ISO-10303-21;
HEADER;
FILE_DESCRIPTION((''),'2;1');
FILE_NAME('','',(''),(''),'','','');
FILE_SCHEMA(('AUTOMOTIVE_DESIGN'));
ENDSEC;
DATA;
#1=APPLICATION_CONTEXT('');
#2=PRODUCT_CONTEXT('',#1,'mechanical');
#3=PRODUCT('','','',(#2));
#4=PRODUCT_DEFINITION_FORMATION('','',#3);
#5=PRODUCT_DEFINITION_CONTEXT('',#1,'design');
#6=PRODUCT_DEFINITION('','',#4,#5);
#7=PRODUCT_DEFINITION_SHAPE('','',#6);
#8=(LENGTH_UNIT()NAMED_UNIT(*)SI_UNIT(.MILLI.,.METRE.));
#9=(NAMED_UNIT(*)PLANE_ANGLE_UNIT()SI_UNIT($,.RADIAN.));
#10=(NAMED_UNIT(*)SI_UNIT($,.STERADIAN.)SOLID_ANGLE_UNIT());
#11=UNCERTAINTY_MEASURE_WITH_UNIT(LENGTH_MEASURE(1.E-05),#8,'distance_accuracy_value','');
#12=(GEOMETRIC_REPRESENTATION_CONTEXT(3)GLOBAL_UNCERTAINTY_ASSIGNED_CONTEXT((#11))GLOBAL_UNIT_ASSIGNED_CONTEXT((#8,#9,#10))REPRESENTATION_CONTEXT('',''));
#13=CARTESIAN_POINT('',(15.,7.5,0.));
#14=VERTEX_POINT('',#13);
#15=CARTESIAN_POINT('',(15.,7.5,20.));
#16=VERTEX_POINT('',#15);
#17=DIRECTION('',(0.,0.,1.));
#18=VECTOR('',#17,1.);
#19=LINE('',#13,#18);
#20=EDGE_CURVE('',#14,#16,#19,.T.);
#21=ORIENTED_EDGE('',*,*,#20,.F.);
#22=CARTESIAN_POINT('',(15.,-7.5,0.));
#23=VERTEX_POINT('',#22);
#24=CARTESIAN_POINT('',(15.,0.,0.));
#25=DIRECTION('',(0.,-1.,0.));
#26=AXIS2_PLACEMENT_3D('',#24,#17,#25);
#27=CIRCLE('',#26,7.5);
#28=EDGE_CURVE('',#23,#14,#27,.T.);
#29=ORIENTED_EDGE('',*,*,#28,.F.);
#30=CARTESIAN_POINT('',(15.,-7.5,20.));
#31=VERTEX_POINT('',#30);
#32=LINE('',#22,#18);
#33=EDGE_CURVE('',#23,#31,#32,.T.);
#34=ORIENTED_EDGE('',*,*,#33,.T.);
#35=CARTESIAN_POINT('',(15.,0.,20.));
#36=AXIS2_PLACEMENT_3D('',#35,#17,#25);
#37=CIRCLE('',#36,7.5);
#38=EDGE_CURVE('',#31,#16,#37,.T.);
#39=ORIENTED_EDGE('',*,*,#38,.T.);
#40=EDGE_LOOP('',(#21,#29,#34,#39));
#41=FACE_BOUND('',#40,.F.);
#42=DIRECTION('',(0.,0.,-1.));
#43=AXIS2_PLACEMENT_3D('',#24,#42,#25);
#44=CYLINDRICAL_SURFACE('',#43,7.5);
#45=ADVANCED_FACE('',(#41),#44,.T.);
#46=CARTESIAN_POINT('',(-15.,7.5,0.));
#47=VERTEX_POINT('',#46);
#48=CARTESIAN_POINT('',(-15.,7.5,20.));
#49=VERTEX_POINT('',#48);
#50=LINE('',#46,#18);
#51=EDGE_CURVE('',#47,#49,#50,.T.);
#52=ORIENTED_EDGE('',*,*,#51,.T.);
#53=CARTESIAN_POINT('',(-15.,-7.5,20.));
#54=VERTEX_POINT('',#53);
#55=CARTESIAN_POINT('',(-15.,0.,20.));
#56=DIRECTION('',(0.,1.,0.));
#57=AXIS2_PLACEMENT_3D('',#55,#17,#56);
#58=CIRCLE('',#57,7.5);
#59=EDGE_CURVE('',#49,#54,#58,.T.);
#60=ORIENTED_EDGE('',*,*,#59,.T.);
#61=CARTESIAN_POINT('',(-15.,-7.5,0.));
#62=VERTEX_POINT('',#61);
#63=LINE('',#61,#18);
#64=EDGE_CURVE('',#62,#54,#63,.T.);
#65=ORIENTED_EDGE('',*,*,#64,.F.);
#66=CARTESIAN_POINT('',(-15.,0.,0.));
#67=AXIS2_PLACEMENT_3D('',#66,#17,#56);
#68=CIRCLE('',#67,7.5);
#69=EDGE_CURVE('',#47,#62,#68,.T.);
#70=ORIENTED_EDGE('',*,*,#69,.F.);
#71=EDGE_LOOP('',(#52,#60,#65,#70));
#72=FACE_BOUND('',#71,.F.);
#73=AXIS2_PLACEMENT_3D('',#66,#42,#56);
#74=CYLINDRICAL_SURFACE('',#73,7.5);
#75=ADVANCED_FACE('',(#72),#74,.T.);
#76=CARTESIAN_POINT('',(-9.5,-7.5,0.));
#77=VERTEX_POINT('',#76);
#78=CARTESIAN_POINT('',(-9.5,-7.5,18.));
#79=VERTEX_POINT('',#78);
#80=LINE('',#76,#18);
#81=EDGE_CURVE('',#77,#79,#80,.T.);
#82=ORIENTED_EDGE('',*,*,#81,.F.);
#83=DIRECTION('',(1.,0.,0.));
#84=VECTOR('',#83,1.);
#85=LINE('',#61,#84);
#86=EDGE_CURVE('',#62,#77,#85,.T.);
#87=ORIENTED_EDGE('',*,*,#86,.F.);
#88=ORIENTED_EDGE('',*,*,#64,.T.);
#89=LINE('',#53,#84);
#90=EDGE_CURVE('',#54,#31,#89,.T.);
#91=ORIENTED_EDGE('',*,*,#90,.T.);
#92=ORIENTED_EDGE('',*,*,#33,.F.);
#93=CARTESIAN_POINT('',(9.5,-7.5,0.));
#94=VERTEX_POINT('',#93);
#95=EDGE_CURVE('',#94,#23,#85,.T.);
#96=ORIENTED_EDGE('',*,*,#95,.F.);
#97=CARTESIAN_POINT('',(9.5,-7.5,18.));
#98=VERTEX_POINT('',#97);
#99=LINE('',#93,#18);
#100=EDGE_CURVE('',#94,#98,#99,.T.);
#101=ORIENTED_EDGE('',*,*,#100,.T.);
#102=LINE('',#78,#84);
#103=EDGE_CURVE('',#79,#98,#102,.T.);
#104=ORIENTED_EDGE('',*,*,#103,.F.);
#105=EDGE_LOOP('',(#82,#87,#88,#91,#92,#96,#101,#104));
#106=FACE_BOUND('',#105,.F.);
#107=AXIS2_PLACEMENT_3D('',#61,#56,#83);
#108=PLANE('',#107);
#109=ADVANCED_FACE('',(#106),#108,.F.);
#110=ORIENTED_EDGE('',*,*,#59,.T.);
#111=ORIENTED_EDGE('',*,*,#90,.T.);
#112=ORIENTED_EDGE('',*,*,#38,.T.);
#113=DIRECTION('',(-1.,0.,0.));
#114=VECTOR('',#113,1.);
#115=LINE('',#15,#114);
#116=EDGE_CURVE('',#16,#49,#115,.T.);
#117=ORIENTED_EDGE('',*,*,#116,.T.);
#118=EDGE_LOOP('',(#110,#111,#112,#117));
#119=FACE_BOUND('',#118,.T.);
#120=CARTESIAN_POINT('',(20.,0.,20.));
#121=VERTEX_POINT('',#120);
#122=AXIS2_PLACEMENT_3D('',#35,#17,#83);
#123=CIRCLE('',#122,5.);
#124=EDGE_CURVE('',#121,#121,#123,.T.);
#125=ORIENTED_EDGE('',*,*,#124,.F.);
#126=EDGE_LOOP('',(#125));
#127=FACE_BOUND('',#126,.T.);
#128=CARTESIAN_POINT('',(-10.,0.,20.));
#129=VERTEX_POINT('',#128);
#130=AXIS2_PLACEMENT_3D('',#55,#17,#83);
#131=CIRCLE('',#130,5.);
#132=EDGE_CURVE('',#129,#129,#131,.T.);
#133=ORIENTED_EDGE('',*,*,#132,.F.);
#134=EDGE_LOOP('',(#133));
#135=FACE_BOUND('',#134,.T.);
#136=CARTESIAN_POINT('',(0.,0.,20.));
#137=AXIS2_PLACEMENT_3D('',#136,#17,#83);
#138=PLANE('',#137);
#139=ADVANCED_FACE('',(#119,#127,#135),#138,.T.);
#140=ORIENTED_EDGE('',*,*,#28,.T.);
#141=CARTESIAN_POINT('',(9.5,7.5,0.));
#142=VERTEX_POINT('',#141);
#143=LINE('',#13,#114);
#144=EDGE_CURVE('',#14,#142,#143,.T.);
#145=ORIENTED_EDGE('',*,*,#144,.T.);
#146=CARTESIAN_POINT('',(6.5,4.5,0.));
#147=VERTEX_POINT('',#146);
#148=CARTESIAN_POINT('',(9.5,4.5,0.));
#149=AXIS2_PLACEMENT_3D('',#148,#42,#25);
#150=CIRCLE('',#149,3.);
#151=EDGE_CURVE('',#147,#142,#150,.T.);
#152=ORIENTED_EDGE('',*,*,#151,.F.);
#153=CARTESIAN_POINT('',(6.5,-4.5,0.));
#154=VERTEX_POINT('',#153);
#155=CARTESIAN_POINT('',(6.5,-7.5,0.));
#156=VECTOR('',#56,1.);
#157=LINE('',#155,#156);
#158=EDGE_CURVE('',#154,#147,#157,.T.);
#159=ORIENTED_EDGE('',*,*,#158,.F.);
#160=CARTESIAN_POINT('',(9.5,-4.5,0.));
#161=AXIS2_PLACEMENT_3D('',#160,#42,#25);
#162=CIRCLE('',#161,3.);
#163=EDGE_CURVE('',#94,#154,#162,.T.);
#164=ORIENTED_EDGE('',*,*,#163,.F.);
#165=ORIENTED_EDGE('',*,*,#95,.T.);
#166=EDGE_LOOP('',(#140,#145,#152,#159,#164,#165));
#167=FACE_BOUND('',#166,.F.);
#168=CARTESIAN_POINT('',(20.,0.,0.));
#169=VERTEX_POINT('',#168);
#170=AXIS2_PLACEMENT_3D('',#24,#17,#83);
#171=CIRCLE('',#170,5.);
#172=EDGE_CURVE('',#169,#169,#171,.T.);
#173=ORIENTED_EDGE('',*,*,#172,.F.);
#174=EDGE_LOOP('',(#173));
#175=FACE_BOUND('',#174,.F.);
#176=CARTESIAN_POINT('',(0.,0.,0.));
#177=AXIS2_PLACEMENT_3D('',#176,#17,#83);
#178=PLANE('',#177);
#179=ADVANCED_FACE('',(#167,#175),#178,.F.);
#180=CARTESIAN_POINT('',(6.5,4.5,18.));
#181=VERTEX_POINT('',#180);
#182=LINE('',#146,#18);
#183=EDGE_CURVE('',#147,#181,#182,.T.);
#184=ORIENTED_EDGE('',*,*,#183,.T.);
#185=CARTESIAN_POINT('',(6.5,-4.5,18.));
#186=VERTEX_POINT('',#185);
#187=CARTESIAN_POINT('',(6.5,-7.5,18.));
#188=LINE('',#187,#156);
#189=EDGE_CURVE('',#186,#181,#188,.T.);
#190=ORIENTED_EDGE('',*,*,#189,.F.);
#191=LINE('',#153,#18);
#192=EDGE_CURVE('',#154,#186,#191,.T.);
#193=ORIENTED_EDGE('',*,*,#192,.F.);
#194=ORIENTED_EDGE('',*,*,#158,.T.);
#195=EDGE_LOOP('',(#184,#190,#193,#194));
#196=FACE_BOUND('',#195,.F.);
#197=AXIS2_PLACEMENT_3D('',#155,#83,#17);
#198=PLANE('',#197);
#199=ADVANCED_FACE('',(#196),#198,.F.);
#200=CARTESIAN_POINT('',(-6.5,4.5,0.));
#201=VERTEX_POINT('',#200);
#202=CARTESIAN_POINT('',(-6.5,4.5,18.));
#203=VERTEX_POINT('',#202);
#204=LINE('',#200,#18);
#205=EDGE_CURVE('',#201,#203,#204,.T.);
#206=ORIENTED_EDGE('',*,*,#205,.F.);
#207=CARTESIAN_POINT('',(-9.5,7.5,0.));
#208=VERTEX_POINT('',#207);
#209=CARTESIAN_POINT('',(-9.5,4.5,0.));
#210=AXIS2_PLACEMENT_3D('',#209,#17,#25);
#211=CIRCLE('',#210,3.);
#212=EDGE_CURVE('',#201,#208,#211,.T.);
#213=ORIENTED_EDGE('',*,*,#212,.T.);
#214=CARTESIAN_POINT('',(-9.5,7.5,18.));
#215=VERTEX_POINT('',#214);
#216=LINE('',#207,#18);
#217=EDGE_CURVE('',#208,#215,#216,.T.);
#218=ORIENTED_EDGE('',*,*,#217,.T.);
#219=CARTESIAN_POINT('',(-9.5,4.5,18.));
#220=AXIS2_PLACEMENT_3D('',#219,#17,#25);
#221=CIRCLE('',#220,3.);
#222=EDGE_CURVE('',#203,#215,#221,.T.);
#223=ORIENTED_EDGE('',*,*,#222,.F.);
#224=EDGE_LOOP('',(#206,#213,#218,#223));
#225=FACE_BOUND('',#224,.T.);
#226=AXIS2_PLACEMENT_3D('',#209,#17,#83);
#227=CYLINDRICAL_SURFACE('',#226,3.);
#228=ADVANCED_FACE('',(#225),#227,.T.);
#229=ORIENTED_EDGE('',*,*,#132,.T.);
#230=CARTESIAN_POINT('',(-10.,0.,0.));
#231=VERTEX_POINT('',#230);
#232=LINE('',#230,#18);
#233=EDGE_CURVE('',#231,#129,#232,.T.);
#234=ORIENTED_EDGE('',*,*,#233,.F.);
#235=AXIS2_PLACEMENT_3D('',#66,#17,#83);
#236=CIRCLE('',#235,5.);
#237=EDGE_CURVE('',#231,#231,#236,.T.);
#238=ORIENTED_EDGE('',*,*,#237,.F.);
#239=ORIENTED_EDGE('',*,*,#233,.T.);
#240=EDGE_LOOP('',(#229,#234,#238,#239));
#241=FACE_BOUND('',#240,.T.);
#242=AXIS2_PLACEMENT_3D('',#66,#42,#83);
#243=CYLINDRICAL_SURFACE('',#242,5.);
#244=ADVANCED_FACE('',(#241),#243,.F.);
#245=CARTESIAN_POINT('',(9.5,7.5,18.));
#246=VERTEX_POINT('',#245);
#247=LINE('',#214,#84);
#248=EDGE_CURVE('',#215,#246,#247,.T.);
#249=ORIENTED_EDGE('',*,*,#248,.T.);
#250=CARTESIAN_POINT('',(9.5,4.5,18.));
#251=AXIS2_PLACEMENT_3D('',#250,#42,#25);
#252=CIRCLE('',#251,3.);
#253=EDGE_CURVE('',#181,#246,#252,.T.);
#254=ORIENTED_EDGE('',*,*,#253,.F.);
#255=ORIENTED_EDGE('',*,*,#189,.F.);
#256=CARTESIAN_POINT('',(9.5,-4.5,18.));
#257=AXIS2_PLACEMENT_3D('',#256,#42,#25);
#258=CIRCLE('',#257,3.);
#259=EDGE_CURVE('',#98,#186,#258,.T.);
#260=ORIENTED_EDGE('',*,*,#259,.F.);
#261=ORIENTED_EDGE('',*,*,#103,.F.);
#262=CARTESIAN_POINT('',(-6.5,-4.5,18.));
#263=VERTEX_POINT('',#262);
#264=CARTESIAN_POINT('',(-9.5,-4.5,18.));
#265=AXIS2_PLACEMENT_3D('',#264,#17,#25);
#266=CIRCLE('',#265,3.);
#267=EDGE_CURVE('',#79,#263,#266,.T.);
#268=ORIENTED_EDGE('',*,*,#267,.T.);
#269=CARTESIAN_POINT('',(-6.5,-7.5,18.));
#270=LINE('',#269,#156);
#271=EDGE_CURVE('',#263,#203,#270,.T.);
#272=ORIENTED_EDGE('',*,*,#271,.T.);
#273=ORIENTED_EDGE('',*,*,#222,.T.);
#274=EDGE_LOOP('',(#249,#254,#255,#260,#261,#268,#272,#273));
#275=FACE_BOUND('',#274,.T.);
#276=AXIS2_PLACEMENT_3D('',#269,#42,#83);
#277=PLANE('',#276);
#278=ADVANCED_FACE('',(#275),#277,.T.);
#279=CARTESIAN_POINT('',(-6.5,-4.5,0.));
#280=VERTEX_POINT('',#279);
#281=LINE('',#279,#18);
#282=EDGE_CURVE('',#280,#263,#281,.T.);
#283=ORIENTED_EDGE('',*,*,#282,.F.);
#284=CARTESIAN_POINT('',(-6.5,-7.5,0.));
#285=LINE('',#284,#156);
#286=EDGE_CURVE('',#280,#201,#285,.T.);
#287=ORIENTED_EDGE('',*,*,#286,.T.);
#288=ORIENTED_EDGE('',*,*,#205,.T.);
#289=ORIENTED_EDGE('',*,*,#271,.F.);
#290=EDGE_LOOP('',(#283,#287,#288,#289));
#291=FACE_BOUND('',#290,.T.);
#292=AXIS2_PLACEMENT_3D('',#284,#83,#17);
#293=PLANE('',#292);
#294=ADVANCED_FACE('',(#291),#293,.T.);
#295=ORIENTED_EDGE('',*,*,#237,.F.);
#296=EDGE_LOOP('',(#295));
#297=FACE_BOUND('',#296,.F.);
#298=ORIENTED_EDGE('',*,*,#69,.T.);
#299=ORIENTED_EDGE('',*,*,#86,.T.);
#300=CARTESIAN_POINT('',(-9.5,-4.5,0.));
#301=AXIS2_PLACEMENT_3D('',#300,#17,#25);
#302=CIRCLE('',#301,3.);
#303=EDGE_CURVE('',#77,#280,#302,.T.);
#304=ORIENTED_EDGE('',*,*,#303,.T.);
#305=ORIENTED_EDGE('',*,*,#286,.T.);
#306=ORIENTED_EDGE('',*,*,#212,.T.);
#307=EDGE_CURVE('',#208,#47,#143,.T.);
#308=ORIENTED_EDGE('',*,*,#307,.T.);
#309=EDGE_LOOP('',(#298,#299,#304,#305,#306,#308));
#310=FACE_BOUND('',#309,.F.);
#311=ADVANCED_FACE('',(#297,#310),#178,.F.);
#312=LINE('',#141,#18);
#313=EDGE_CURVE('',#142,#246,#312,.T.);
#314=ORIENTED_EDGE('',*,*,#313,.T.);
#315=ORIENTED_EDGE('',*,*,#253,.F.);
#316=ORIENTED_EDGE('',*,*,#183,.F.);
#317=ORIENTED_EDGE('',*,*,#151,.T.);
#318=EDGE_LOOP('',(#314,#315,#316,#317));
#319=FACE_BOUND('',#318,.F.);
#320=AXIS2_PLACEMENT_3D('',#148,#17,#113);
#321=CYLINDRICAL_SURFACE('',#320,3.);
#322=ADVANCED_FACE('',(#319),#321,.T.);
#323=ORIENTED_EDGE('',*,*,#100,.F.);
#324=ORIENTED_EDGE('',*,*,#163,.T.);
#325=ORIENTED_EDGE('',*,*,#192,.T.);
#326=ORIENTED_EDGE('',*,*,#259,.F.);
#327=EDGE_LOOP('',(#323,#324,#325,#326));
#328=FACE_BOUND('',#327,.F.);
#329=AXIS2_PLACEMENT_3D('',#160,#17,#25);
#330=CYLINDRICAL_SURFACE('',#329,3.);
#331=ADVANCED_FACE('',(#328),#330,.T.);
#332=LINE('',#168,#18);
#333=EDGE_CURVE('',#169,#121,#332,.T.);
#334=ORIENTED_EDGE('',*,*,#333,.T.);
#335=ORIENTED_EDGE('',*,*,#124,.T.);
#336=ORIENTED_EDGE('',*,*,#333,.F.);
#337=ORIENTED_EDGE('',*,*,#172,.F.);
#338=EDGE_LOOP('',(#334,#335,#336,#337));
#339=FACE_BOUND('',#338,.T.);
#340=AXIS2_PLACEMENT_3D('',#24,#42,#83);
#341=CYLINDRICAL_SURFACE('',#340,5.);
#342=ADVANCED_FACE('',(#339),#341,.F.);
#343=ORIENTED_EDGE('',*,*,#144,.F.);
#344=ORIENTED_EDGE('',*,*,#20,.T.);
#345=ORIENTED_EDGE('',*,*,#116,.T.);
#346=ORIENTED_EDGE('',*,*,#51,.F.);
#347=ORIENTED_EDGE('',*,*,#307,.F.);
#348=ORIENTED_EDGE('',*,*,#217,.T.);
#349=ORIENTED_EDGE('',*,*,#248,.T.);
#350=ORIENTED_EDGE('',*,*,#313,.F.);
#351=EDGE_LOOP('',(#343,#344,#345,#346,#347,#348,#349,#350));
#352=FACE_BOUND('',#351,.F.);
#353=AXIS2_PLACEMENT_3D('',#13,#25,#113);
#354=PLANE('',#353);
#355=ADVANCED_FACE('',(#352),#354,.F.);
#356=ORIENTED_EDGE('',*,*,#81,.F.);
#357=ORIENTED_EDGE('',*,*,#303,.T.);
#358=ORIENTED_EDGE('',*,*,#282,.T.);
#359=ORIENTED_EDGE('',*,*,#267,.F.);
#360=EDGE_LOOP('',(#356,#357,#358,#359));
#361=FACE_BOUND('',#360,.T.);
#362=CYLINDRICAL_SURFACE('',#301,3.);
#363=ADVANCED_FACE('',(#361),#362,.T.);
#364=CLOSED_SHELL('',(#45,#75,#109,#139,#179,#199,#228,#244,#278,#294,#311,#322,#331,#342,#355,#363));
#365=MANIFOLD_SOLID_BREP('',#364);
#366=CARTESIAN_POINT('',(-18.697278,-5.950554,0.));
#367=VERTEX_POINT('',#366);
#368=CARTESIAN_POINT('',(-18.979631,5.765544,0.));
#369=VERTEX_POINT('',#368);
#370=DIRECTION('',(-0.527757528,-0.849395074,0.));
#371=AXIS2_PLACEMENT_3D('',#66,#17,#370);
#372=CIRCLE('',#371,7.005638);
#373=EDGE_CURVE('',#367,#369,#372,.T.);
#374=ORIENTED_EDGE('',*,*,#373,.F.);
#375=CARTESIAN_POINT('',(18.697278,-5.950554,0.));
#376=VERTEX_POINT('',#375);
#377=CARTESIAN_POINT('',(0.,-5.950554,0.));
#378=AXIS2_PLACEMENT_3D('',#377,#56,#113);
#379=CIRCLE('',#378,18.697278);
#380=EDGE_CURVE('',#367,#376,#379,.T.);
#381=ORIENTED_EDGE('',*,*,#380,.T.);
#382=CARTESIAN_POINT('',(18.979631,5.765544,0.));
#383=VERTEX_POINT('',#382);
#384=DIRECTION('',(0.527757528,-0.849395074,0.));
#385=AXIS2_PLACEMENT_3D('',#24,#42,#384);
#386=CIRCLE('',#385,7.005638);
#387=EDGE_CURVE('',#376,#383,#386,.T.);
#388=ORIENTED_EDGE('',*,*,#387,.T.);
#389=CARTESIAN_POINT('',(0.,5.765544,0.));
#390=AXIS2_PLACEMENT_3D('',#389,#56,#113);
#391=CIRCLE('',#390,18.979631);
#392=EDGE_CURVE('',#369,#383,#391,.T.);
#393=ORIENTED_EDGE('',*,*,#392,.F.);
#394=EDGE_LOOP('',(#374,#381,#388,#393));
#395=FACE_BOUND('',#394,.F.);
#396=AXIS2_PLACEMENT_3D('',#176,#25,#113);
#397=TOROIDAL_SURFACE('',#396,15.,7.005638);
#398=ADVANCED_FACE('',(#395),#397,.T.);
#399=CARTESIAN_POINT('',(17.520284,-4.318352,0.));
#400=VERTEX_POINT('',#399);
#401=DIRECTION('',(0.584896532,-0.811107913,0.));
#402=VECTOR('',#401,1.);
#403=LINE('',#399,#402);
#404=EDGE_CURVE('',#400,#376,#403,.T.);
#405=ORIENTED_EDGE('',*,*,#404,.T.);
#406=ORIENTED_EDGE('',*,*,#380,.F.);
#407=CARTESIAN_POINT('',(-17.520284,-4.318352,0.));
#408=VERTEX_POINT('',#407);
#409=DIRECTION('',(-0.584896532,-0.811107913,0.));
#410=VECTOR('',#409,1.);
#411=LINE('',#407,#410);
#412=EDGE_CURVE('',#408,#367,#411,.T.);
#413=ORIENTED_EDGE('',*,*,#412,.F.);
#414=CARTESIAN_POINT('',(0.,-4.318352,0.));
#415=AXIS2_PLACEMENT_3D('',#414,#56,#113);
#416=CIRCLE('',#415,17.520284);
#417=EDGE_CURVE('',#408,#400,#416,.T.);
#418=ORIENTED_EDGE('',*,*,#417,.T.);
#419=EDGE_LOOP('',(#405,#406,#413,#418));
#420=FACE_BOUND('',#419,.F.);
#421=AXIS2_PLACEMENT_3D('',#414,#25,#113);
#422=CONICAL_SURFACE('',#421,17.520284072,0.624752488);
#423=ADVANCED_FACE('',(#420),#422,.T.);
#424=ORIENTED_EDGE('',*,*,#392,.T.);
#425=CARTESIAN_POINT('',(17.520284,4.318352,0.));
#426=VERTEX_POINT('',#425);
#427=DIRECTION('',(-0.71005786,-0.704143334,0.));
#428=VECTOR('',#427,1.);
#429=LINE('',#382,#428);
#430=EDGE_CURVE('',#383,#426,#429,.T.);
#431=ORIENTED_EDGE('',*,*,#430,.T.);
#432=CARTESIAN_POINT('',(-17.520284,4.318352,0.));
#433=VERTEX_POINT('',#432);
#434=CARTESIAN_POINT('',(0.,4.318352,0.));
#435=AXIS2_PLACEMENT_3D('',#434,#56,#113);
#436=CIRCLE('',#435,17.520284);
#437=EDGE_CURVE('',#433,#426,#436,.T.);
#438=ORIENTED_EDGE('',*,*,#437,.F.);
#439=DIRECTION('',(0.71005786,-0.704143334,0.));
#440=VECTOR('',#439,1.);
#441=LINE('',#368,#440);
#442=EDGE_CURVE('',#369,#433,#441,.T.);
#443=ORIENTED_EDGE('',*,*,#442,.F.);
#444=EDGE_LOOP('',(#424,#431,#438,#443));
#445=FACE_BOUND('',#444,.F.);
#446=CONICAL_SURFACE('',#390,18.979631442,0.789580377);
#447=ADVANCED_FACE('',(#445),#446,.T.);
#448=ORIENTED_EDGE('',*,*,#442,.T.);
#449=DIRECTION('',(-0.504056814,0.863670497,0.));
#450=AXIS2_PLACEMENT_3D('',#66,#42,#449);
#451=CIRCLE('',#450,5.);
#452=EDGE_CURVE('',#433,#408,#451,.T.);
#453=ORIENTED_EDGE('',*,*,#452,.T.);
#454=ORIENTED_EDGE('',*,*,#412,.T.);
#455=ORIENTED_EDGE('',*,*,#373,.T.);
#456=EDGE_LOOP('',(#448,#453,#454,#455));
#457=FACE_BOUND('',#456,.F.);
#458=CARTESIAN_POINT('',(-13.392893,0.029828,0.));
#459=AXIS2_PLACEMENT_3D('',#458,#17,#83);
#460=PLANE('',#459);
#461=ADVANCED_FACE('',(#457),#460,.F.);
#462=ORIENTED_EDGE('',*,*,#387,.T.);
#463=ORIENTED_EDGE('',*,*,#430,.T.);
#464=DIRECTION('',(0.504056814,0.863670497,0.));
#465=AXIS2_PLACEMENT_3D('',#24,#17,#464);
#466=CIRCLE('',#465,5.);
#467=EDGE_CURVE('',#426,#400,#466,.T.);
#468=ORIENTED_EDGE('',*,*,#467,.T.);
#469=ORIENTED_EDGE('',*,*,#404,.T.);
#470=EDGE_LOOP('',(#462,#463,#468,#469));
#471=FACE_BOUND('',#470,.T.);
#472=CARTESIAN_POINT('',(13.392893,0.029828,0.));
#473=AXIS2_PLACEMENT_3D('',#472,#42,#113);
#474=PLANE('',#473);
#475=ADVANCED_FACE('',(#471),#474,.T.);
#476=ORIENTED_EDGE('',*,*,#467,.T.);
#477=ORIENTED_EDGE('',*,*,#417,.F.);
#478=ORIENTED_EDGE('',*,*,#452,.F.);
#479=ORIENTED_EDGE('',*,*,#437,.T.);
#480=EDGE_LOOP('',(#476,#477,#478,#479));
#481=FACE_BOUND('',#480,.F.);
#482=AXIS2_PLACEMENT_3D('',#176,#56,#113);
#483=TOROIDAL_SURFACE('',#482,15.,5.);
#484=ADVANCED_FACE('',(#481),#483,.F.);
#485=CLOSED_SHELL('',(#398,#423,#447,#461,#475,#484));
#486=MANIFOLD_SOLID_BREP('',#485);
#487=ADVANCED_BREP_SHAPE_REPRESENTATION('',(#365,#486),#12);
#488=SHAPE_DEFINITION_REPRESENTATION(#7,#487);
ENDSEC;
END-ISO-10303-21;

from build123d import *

# Parameters (mm, degrees)
F0_R     = 5
F1_DEPTH = 20
F3_ANGLE = 180
F4_W     = 13
F4_H     = 18
F5_DEPTH = 25
F6_R     = 3


with BuildPart() as f1:
    # F0 (on Top) → F1 (new body)
    with BuildSketch(Plane.XY):
        with BuildLine():
            ThreePointArc((-15, 7.5), (-9.6966991411, 5.3033008589), (-7.5, 0))
            ThreePointArc((-7.5, 0), (-9.6966991411, -5.3033008589), (-15, -7.5))
            Line((-15, -7.5), (0, -7.5))
            Line((0, -7.5), (5, -7.5))
            Line((5, -7.5), (15, -7.5))
            ThreePointArc((15, -7.5), (7.5, 0), (15, 7.5))
            Line((15, 7.5), (0, 7.5))
            Line((0, 7.5), (-15, 7.5))
        make_face()
        with BuildLine():
            ThreePointArc((-15, -7.5), (-9.6966991411, -5.3033008589), (-7.5, 0))
            ThreePointArc((-7.5, 0), (-9.6966991411, 5.3033008589), (-15, 7.5))
            ThreePointArc((-15, 7.5), (-22.5, 0), (-15, -7.5))
        make_face()
        with Locations((-15, 0)):
            Circle(F0_R, mode=Mode.SUBTRACT)
        with BuildLine():
            ThreePointArc((22.5, 0), (20.3033008589, 5.3033008589), (15, 7.5))
            ThreePointArc((15, 7.5), (7.5, 0), (15, -7.5))
            ThreePointArc((15, -7.5), (20.3033008589, -5.3033008589), (22.5, 0))
        make_face()
        with Locations((15, 0)):
            Circle(F0_R, mode=Mode.SUBTRACT)
    extrude(amount=F1_DEPTH)

    # F4 (on face) → F5 (cut)
    with BuildSketch(Plane.XZ.offset(7.5)):
        with Locations((0, 9)):
            Rectangle(F4_W, F4_H)
    extrude(amount=-F5_DEPTH, mode=Mode.SUBTRACT)

    # F6
    f6_edges = [f1.edges().sort_by_distance(p)[0] for p in [
        (-6.5, -7.5, 9),
        (-6.5, 7.5, 9),
        (6.5, 7.5, 9),
        (6.5, -7.5, 9),
    ]]
    fillet(f6_edges, radius=F6_R)


with BuildPart() as f3:
    # F2 (on Top) → F3 (revolve)
    with BuildSketch(Plane.XY):
        with BuildLine():
            Line((-17.5202840718, -4.3183524865), (-18.6972782109, -5.9505544354))
            ThreePointArc((-18.6972782109, -5.9505544354), (-7.9963954846, 0.1687840342), (-18.9796314418, 5.7655440199))
            Line((-18.9796314418, 5.7655440199), (-17.5202840718, 4.3183524865))
            ThreePointArc((-17.5202840718, 4.3183524865), (-10, 0), (-17.5202840718, -4.3183524865))
        make_face()
    revolve(axis=Axis((0, 4.9783602892, 0), (0, 1, 0)), revolution_arc=F3_ANGLE)


solid = Compound([f1.part, f3.part])
